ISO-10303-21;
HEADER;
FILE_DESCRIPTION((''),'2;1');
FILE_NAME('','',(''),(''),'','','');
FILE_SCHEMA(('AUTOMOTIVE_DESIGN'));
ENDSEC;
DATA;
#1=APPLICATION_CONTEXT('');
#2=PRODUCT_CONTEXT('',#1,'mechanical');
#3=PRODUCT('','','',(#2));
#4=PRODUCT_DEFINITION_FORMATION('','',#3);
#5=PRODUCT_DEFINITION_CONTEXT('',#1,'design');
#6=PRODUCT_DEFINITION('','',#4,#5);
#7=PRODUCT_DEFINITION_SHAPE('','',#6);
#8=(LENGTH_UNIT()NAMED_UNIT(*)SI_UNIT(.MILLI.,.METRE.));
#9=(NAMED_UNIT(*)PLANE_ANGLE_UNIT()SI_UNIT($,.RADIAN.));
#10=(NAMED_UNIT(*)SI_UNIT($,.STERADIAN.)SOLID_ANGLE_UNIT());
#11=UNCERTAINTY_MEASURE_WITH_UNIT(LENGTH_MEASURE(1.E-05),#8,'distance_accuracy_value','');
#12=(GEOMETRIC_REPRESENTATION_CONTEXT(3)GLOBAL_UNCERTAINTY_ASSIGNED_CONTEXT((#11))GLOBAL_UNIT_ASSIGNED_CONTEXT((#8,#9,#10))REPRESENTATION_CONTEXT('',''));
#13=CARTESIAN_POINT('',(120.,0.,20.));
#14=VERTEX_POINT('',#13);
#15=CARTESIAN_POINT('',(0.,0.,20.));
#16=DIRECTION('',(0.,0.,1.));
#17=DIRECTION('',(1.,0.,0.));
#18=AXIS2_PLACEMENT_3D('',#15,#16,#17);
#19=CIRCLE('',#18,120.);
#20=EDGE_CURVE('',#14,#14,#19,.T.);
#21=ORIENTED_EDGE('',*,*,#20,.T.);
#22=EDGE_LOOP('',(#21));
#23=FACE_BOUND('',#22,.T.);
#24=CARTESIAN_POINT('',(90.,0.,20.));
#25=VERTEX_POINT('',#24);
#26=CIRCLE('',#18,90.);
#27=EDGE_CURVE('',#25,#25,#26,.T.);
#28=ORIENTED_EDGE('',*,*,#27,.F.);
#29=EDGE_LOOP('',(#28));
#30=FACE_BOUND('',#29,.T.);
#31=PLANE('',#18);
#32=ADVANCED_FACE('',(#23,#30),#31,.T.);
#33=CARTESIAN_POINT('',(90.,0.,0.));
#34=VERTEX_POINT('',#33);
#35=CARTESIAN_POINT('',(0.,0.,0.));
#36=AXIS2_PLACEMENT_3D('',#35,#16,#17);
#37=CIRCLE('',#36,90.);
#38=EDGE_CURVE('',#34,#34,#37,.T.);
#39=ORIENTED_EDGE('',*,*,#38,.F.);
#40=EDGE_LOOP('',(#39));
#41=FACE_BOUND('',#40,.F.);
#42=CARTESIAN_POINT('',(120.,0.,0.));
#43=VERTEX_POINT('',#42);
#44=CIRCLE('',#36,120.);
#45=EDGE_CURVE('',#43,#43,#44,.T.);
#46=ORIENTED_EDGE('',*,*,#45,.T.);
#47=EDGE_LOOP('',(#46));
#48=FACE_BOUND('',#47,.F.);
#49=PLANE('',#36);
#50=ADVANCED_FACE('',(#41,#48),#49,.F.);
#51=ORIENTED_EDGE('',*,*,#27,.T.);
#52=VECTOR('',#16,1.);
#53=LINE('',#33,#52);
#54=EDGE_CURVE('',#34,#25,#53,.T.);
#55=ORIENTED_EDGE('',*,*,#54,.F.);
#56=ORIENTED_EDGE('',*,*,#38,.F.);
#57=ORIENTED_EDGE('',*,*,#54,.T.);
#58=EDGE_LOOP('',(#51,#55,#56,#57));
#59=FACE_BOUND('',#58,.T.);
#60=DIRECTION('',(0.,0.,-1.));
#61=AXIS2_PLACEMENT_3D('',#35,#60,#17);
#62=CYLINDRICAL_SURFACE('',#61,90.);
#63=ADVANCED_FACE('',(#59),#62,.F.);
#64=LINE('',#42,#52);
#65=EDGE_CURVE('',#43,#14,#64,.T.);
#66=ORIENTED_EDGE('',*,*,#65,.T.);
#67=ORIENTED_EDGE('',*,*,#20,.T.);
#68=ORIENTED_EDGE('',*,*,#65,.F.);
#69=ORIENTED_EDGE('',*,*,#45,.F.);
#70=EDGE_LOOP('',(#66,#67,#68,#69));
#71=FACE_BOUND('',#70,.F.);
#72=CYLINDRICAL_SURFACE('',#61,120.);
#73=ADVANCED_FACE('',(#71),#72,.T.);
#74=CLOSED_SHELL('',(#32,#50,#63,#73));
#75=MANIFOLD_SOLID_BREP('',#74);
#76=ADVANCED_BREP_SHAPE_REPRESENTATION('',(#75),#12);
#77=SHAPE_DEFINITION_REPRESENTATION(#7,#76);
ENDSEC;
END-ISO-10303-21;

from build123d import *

# Parameters (mm, degrees)
F0_R     = 120
F0_R_2   = 90
F1_DEPTH = 20


# Not quite as in the source:
# - a feature of the source that left no trace in its solid (it failed there, or was rolled back) is left out


with BuildPart() as f1:
    # F0 (on Top) → F1 (new body)
    with BuildSketch(Plane.XY):
        Circle(F0_R)
        Circle(F0_R_2, mode=Mode.SUBTRACT)
    extrude(amount=F1_DEPTH)


solid = f1.part
